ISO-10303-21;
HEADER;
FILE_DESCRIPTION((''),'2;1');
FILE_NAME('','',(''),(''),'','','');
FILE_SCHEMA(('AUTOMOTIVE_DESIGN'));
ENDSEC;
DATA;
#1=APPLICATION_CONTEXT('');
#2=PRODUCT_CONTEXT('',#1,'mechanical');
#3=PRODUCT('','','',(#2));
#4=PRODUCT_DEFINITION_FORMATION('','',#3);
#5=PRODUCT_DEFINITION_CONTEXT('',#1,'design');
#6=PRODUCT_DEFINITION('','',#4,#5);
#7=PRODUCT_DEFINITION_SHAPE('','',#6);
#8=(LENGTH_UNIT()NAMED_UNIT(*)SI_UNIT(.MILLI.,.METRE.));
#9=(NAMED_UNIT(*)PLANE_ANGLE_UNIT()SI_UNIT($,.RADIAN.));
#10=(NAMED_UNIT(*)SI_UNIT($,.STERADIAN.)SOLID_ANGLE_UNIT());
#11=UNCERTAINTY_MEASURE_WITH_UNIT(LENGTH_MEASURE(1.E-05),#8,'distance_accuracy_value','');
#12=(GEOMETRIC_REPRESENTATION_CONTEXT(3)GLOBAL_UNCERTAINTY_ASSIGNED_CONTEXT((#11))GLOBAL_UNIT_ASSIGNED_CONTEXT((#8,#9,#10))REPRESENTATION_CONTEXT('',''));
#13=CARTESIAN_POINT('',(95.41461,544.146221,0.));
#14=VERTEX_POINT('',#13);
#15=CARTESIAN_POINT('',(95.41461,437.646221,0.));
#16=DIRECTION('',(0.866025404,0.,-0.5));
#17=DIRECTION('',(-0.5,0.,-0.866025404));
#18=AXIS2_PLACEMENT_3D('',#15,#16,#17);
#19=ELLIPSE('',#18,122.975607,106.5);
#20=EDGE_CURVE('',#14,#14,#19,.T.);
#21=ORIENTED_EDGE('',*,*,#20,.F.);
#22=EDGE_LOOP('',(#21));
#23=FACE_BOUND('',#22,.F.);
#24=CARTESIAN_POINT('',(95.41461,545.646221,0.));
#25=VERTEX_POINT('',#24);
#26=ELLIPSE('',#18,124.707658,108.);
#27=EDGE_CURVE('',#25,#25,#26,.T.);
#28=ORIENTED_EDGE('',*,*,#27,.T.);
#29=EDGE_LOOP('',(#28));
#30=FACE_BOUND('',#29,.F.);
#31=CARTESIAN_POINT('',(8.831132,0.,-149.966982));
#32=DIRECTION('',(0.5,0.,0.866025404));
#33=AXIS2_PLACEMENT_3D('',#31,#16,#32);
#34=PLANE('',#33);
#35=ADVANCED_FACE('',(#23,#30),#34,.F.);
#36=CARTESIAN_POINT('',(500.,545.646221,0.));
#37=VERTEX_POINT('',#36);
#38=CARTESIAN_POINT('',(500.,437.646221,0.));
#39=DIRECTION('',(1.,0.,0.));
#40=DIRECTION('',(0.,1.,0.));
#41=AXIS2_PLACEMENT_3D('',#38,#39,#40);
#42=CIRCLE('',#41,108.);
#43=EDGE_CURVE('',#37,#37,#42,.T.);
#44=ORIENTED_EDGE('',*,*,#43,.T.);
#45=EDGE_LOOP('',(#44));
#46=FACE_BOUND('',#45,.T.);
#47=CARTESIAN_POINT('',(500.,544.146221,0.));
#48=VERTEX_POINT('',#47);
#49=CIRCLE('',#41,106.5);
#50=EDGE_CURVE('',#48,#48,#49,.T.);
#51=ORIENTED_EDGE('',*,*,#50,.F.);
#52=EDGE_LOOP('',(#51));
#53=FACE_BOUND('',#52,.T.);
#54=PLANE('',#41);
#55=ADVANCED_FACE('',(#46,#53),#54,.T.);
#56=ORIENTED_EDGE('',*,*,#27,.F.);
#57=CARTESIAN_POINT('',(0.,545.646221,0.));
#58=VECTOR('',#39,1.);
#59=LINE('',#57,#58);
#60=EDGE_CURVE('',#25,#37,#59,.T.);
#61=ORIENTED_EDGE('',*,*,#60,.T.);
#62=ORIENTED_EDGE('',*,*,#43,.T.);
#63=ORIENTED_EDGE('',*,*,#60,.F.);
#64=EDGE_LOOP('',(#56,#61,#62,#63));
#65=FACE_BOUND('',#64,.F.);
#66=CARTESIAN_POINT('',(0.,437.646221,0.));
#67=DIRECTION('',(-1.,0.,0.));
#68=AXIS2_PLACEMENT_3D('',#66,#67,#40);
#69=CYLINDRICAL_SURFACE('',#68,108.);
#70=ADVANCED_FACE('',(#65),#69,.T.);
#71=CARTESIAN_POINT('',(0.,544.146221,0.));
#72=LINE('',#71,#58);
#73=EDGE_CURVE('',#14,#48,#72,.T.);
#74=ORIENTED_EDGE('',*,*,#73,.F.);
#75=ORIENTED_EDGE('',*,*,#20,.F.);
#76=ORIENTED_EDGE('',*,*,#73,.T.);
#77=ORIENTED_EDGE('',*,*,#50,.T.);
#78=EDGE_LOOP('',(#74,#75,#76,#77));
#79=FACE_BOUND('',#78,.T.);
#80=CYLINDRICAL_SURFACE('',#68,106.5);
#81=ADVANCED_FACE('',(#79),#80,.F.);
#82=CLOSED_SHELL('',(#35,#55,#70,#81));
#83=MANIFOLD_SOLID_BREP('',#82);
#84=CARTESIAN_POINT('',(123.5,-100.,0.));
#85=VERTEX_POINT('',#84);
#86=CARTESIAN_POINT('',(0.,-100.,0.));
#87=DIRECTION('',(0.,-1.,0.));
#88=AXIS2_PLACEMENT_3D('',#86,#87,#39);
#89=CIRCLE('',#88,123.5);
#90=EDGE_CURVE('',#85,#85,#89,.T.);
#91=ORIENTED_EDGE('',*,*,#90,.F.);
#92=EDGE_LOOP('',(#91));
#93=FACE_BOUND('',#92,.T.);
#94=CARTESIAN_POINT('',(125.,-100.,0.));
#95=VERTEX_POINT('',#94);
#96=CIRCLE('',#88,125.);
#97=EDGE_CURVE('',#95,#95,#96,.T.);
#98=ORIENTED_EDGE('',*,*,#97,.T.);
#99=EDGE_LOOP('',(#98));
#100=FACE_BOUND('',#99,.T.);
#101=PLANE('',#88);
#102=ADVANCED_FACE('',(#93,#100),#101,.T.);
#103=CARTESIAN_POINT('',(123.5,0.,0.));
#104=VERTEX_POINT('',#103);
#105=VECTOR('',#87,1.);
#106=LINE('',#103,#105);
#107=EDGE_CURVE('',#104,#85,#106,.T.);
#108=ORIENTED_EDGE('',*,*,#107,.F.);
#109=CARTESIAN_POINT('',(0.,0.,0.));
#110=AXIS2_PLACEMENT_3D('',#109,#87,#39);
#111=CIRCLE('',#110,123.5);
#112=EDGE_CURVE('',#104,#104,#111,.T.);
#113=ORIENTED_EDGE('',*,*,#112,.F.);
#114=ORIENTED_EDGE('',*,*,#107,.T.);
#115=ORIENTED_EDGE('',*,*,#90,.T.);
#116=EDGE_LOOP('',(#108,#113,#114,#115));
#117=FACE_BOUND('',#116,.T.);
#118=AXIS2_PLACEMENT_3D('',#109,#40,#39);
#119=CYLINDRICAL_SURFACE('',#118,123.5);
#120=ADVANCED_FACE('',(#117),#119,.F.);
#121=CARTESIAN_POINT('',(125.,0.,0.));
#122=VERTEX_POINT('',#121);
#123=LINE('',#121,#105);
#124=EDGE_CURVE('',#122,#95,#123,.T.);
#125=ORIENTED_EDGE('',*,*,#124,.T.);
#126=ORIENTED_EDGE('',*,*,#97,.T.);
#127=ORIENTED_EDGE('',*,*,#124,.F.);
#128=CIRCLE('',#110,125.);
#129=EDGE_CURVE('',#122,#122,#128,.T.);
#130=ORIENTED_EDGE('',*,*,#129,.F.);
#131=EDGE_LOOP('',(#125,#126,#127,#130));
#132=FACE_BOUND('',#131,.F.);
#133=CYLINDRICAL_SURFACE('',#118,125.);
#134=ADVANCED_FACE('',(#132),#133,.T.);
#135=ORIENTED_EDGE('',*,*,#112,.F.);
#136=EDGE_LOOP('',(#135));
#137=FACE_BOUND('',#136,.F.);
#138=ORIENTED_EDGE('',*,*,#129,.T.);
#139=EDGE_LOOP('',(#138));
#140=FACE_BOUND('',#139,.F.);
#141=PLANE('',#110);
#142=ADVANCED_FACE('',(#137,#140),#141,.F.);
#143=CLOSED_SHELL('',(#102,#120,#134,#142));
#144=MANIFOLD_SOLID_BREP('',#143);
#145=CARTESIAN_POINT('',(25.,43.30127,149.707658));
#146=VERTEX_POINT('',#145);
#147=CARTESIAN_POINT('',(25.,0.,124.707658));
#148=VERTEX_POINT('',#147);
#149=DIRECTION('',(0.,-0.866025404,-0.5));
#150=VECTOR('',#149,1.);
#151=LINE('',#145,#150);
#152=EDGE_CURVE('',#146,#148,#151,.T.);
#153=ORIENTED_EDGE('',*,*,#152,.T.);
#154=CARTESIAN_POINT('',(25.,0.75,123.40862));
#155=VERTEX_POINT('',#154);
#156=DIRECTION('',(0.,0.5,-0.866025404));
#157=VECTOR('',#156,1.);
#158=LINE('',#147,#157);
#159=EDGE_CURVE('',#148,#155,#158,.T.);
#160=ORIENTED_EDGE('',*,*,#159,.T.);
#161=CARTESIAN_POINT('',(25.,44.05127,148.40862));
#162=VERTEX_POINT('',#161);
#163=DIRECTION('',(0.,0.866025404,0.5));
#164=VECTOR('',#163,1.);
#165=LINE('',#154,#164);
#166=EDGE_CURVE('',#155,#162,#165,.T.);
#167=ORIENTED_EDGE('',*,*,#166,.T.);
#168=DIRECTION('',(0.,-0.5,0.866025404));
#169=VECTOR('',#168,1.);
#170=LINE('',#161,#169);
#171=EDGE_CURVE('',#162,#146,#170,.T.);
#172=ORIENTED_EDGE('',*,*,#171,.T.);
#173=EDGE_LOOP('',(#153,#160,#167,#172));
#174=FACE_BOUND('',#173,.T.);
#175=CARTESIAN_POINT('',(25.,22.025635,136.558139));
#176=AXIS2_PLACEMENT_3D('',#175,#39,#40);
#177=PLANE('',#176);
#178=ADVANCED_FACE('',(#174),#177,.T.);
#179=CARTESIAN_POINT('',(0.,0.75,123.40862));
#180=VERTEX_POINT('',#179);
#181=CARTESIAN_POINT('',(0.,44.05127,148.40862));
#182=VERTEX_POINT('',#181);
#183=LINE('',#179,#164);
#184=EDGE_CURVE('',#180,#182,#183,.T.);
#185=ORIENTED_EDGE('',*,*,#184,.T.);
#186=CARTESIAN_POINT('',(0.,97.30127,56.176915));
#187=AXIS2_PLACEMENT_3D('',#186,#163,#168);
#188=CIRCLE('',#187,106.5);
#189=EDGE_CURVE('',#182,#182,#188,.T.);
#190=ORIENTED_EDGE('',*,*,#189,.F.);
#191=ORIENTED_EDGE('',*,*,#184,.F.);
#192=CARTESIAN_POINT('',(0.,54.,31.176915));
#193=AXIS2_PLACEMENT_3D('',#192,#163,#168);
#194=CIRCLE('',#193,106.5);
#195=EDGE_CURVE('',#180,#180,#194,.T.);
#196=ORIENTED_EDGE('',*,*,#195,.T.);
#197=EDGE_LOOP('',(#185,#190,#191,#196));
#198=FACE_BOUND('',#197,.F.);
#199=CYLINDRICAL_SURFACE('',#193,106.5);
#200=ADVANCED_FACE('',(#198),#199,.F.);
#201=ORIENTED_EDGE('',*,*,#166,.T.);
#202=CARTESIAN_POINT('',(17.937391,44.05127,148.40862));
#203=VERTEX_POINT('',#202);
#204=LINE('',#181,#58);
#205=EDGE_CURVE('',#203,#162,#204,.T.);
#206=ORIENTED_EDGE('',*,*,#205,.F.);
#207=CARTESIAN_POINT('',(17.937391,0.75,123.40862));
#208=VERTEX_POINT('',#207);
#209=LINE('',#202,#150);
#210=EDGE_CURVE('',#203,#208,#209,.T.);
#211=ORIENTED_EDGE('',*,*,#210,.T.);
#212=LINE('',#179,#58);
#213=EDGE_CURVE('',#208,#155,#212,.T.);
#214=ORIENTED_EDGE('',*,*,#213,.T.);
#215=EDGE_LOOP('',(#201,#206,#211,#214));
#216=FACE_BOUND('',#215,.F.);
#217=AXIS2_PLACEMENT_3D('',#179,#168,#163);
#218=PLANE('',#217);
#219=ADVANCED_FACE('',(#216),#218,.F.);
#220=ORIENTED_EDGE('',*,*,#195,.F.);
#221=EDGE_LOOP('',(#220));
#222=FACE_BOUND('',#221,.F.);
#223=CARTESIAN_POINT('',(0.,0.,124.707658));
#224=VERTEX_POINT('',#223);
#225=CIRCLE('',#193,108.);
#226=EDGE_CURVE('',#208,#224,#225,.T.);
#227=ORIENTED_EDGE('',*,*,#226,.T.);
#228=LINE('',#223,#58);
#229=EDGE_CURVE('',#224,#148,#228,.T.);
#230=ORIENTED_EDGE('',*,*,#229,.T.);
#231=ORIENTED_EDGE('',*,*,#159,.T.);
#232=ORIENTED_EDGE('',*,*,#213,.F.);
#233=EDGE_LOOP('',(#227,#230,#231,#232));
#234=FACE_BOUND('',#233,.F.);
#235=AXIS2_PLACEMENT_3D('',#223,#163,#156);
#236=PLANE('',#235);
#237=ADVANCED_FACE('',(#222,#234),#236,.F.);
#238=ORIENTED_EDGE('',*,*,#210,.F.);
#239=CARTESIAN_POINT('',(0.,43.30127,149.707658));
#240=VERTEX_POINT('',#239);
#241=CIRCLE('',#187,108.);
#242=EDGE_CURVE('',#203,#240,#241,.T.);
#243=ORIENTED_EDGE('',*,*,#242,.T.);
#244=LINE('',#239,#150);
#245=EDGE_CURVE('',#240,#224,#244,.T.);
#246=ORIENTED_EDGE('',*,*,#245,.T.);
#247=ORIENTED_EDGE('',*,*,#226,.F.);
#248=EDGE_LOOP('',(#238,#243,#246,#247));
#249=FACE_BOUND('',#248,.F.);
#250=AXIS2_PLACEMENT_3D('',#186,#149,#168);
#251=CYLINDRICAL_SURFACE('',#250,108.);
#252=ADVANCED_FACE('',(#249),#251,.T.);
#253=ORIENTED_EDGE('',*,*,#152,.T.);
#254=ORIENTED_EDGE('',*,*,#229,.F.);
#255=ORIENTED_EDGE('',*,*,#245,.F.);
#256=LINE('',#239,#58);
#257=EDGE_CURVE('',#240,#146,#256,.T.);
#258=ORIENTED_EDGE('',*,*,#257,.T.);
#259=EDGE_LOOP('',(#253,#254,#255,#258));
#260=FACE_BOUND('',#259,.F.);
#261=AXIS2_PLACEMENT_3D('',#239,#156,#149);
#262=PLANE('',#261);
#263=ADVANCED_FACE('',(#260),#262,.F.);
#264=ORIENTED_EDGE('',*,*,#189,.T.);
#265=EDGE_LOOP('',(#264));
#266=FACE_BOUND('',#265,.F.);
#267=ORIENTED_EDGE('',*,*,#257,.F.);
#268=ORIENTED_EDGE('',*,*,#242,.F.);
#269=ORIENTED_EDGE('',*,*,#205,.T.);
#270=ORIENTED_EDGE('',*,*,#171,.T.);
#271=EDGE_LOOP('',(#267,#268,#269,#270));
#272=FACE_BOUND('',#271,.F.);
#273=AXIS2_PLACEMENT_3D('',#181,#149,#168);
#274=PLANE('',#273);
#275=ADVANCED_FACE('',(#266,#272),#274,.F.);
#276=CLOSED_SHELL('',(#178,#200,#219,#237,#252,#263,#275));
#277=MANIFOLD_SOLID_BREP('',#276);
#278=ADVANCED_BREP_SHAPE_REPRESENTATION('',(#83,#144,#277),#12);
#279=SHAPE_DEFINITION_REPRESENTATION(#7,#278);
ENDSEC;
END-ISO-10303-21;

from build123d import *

# Parameters (mm, degrees)
F0_R     = 125
F0_R_2   = 123.5
F1_DEPTH = 100
F4_DEPTH = 25
F5_R     = 108
F5_R_2   = 106.5
F6_DEPTH = 500
F8_DEPTH = 600


with BuildPart() as f1:
    # F0 (on Front) → F1 (new body)
    with BuildSketch(Plane.XZ):
        Circle(F0_R)
        Circle(F0_R_2, mode=Mode.SUBTRACT)
    extrude(amount=F1_DEPTH)


with BuildPart() as f3:
    # F2 (on Right) → F3 (revolve)
    with BuildSketch(Plane.YZ):
        Polygon((43.3012701892, 149.707658145), (0, 124.707658145), (0.75, 123.4086200393), (44.0512701892, 148.4086200393), align=None)
    revolve(axis=Axis((0, 48.6506350946, 28.0884572681), (0, 0.8660254038, 0.5)))

    # F2 (on Right) → F4 (join)
    with BuildSketch(Plane.YZ):
        Polygon((43.3012701892, 149.707658145), (0, 124.707658145), (0.75, 123.4086200393), (44.0512701892, 148.4086200393), align=None)
    extrude(amount=F4_DEPTH)


with BuildPart() as f6:
    # F5 (on Right) → F6 (new body)
    with BuildSketch(Plane.YZ):
        with Locations((437.6462212987, 0)):
            Circle(F5_R)
        with Locations((437.6462212987, 0)):
            Circle(F5_R_2, mode=Mode.SUBTRACT)
    extrude(amount=F6_DEPTH)

    # F7 (on Front) → F8 (cut)
    with BuildSketch(Plane.XZ):
        Polygon((-296.155548444, 26.1171597825), (8.8311323739, -149.966982487), (209.2771804602, 197.2157569749), (-95.7095003577, 373.2998992443), align=None)
    extrude(amount=-F8_DEPTH, mode=Mode.SUBTRACT)


solid = Compound([f1.part, f3.part, f6.part])
